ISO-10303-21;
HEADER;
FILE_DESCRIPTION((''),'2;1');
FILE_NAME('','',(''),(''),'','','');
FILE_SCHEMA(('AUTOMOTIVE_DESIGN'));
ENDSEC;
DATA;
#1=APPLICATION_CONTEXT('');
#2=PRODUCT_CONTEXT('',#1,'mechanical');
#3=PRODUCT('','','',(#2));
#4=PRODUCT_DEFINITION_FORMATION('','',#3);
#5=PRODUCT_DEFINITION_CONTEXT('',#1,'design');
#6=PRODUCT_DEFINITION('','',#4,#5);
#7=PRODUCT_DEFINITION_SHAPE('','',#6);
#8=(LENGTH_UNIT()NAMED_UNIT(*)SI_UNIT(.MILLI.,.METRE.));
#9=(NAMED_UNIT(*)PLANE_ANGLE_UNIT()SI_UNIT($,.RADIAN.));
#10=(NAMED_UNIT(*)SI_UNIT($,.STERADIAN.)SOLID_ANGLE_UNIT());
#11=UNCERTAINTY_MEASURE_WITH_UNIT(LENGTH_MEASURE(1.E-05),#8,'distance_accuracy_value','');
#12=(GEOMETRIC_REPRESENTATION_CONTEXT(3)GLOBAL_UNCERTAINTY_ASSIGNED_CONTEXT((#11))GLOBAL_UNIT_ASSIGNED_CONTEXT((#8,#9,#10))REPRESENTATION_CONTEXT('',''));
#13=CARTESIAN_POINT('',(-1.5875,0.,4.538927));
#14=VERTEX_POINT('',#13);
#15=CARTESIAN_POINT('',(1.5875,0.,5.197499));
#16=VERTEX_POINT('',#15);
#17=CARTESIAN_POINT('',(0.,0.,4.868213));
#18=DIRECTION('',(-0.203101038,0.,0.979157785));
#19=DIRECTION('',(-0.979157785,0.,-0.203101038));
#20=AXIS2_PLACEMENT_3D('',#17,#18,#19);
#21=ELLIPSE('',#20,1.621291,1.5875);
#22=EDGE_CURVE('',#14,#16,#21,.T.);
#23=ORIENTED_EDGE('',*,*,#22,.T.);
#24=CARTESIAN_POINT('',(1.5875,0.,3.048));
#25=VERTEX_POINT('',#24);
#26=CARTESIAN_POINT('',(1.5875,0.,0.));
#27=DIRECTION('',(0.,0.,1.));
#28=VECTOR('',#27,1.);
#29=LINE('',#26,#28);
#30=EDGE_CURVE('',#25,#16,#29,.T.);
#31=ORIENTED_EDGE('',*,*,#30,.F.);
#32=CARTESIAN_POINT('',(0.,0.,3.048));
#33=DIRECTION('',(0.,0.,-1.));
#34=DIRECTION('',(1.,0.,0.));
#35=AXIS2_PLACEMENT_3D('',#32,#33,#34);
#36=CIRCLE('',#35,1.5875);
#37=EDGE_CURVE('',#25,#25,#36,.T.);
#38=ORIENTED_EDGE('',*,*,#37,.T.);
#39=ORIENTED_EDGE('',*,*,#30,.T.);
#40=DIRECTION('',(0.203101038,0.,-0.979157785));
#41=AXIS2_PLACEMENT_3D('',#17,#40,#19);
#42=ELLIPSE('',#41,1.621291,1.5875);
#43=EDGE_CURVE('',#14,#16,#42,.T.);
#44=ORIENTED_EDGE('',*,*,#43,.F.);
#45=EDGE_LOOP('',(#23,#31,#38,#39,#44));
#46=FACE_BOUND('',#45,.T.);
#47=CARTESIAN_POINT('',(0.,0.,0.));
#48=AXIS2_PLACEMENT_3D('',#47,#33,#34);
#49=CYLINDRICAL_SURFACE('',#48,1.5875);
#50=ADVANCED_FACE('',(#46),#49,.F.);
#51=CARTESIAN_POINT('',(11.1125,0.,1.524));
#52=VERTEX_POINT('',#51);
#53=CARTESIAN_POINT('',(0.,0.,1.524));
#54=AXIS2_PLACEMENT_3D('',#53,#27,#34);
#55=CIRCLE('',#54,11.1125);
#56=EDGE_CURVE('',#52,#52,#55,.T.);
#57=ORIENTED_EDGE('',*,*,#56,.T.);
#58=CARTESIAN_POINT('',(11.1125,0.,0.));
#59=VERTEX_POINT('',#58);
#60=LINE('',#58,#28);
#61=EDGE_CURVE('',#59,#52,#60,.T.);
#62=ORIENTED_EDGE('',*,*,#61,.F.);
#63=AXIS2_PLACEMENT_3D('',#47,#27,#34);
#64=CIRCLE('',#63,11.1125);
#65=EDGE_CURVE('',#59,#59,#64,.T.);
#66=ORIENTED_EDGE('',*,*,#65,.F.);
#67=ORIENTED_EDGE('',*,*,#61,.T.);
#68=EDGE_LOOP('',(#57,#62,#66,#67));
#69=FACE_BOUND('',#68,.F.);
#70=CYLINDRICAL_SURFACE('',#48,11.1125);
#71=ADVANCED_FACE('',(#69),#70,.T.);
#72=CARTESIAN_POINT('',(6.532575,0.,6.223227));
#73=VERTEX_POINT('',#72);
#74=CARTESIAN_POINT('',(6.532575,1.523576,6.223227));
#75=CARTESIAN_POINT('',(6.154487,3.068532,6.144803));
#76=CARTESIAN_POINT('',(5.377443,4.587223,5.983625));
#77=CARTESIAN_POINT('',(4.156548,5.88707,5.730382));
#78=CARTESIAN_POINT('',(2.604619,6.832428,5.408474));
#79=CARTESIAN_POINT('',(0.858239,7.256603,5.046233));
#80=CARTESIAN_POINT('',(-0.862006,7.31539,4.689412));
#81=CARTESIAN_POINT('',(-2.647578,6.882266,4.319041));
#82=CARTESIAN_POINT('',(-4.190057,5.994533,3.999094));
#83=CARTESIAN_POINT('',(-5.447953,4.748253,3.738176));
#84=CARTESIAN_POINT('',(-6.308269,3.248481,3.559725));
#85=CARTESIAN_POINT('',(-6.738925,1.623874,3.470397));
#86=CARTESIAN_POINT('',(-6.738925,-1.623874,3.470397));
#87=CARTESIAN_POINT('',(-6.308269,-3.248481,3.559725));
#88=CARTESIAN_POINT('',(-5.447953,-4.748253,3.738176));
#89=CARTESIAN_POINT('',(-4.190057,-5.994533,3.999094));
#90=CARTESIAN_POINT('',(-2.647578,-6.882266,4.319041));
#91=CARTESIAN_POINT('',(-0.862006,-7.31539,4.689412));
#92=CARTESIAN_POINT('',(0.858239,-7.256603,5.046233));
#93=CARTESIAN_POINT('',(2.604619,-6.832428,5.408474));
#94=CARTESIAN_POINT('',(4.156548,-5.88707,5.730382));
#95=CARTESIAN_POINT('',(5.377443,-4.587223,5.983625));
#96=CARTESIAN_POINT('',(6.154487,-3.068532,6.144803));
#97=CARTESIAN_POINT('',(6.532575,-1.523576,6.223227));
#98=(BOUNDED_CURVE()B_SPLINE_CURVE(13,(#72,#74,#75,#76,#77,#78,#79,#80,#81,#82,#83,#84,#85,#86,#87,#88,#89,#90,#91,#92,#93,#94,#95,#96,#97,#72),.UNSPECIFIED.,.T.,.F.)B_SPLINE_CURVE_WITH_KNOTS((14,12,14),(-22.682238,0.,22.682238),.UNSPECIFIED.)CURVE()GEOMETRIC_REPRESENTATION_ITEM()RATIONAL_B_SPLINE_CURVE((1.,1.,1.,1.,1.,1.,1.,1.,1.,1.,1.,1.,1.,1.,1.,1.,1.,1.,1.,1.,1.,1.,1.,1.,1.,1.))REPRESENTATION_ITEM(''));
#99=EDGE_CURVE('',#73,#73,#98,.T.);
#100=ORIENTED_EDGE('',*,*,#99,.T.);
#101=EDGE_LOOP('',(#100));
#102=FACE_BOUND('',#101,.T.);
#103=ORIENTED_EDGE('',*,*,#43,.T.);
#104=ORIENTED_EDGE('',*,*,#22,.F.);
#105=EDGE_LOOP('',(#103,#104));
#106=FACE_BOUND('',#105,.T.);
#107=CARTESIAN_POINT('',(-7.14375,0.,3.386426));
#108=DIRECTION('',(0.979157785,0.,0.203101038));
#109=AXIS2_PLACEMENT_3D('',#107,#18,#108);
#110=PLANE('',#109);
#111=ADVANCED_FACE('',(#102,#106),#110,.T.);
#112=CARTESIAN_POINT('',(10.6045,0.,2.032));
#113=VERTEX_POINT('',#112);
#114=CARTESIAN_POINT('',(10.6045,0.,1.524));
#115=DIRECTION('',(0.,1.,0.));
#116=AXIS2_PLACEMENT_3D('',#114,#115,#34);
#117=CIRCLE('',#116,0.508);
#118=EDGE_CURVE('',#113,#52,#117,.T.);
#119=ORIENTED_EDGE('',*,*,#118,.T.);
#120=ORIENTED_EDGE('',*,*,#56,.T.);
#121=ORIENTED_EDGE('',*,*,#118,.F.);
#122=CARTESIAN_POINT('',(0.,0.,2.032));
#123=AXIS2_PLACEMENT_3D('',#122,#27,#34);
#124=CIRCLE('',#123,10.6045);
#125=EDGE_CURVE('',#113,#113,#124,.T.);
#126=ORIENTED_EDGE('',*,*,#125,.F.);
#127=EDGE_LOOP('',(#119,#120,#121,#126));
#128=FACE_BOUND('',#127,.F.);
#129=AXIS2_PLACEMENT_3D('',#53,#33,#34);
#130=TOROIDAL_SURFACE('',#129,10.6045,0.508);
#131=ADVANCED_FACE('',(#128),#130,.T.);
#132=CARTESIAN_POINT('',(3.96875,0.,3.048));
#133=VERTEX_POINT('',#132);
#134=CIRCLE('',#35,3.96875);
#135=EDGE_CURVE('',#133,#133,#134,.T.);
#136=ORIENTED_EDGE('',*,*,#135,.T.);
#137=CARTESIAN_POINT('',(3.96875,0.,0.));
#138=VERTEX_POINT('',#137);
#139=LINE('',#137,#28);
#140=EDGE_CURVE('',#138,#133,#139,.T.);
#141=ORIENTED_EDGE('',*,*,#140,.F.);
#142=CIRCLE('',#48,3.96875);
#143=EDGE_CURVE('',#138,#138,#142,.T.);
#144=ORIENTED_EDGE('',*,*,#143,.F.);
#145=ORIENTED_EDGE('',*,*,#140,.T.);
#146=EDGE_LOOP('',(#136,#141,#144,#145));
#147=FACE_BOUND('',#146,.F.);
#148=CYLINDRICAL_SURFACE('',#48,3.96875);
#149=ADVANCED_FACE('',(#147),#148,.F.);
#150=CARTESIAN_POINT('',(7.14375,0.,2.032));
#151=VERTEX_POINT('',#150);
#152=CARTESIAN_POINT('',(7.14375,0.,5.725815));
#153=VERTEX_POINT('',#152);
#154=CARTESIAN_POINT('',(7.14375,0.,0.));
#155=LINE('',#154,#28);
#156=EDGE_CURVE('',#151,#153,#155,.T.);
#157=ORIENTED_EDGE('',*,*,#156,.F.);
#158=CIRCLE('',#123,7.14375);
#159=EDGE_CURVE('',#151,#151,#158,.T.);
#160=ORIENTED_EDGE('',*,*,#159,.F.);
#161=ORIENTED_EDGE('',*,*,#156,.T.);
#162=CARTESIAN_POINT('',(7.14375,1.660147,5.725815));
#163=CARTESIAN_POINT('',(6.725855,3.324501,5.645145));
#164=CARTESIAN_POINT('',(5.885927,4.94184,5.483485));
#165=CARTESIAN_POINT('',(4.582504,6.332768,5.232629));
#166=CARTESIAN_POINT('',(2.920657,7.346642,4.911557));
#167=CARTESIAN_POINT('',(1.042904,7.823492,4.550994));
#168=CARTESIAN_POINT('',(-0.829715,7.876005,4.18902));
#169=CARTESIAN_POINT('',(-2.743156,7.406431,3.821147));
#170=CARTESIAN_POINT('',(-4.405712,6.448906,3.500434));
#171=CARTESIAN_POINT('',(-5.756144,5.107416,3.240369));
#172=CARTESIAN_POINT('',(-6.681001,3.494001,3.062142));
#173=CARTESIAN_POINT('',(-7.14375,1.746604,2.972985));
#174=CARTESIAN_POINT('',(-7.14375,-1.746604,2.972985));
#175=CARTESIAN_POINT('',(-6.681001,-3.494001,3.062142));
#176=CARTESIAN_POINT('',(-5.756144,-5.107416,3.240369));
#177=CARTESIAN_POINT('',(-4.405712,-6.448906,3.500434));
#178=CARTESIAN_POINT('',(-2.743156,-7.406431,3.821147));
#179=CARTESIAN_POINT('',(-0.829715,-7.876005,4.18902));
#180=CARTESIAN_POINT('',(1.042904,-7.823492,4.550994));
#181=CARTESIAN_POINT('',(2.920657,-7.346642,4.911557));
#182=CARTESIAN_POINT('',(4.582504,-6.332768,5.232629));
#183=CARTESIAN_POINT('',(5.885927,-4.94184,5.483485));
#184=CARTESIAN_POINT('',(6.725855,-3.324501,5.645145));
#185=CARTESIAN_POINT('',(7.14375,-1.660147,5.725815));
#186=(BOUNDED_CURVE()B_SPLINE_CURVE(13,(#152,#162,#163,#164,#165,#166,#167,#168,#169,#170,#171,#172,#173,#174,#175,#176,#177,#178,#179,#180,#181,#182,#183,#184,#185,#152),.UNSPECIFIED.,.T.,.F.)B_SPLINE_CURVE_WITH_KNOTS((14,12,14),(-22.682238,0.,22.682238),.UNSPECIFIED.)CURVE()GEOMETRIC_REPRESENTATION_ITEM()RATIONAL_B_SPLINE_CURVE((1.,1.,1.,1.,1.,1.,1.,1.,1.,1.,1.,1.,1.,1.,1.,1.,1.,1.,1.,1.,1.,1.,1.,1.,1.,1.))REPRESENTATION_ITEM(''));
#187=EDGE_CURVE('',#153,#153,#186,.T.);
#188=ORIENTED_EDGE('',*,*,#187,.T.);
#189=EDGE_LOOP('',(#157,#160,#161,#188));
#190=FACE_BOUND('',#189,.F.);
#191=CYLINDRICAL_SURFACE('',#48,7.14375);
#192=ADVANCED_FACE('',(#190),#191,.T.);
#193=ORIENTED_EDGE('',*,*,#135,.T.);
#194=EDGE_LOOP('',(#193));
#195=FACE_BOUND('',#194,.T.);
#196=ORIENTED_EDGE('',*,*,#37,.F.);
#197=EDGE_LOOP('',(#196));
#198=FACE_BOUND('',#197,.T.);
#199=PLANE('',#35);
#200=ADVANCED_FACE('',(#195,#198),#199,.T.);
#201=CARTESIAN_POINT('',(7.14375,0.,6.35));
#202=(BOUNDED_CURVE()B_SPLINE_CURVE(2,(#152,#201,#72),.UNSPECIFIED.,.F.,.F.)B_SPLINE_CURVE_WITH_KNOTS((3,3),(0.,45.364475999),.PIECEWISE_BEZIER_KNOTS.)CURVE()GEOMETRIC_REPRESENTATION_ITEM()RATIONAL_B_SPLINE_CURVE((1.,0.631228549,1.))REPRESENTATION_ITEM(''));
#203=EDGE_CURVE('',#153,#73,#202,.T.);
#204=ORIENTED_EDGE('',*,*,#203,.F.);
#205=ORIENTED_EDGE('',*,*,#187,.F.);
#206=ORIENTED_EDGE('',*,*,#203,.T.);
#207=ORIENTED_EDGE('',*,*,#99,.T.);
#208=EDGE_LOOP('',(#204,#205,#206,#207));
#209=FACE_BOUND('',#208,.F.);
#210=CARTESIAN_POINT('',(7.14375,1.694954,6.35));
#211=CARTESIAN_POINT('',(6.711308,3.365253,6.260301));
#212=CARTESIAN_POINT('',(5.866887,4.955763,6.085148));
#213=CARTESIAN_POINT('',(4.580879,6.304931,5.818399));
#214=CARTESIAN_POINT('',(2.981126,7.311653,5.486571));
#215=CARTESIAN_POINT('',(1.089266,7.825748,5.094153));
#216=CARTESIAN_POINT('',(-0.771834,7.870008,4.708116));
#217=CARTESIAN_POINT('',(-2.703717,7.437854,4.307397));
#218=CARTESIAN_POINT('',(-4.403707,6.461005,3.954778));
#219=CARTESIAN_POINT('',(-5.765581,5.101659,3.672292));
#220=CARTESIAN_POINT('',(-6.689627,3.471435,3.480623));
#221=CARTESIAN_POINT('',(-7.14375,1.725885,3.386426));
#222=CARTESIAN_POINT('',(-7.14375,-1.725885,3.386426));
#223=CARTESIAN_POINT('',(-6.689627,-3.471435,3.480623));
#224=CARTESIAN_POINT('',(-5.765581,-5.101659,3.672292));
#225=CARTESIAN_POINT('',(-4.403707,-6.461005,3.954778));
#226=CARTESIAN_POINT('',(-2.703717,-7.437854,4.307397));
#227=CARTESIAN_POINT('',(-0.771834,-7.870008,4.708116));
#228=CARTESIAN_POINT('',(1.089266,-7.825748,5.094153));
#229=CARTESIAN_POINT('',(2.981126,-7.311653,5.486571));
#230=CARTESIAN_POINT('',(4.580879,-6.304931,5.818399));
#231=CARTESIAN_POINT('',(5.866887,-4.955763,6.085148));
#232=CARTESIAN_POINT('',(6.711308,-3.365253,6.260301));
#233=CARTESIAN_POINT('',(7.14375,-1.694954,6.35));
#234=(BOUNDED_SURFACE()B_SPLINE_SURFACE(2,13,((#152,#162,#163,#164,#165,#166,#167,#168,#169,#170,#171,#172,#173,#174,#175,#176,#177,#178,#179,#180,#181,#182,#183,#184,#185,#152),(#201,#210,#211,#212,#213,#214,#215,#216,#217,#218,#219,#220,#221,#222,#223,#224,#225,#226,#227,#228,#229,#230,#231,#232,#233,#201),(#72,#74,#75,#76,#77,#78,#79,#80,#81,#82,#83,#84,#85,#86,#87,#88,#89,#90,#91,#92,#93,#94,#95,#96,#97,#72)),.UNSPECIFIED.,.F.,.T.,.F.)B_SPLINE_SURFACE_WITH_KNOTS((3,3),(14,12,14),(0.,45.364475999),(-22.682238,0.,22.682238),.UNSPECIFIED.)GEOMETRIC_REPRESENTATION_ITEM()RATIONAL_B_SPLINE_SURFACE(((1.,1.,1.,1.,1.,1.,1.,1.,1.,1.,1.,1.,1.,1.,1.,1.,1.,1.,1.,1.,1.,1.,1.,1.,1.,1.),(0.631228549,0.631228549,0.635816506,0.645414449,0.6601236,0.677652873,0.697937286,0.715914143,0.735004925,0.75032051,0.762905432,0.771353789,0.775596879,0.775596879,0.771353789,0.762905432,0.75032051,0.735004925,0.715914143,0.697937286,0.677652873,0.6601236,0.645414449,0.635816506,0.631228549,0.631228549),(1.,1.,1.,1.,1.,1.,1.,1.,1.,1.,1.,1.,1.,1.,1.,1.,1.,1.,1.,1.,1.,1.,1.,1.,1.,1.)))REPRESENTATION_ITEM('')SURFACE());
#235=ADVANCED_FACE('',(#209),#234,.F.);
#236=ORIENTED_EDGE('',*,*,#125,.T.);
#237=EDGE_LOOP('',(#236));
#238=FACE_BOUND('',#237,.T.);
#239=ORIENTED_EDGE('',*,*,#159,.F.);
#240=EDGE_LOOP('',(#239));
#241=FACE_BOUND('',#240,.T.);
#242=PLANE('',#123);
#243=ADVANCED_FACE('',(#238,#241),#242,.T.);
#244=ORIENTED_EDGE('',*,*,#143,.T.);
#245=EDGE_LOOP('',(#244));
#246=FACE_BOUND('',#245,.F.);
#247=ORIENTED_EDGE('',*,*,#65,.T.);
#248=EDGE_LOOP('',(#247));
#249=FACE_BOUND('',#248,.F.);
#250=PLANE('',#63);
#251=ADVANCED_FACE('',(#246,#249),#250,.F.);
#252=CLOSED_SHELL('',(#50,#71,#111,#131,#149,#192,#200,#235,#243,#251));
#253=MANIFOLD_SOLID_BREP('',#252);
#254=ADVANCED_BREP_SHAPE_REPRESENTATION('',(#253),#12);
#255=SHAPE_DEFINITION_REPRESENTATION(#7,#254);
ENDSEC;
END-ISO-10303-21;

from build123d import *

# Parameters (mm, degrees)
F0_R          = 11.1125
F0_R_2        = 7.14375
F1_DEPTH      = 2.032
F0_R_3        = 1.5875
F2_DEPTH      = 6.35
F4_DEPTH      = 11.1135
F4_DEPTH_BACK = 11.1135
F5_R          = 3.96875
F5_R_2        = 1.5875
F6_DEPTH      = 3.048
F7_R          = 0.508


with BuildPart() as f1:
    # F0 (on Top) → F1 (new body)
    with BuildSketch(Plane.XY):
        Circle(F0_R)
        Circle(F0_R_2, mode=Mode.SUBTRACT)
    extrude(amount=F1_DEPTH)

    # F0 (on Top) → F2 (join)
    with BuildSketch(Plane.XY):
        Circle(F0_R_2)
        Circle(F0_R_3, mode=Mode.SUBTRACT)
    extrude(amount=F2_DEPTH)

    # F3 (on Front) → F4 (cut, two sides)
    with BuildSketch(Plane.XZ) as f4_sk:
        Polygon((7.14375, 6.35), (-7.14375, 6.35), (-7.14375, 3.3864264842), align=None)
    extrude(amount=-F4_DEPTH, mode=Mode.SUBTRACT)
    extrude(f4_sk.sketch, amount=F4_DEPTH_BACK, mode=Mode.SUBTRACT)

    # F5 (on face) → F6 (cut)
    with BuildSketch(Plane(origin=(0, 0, 0), x_dir=(1, 0, 0), z_dir=(0, 0, -1))):
        Circle(F5_R)
        Circle(F5_R_2, mode=Mode.SUBTRACT)
    extrude(amount=-F6_DEPTH, mode=Mode.SUBTRACT)

    # F7
    f7_edges = [f1.edges().sort_by_distance(p)[0] for p in [
        (0, -7.14375, 4.868213),
        (0, 7.14375, 4.868213),
        (-11.1125, 0, 2.032),
    ]]
    fillet(f7_edges, radius=F7_R)


solid = f1.part
